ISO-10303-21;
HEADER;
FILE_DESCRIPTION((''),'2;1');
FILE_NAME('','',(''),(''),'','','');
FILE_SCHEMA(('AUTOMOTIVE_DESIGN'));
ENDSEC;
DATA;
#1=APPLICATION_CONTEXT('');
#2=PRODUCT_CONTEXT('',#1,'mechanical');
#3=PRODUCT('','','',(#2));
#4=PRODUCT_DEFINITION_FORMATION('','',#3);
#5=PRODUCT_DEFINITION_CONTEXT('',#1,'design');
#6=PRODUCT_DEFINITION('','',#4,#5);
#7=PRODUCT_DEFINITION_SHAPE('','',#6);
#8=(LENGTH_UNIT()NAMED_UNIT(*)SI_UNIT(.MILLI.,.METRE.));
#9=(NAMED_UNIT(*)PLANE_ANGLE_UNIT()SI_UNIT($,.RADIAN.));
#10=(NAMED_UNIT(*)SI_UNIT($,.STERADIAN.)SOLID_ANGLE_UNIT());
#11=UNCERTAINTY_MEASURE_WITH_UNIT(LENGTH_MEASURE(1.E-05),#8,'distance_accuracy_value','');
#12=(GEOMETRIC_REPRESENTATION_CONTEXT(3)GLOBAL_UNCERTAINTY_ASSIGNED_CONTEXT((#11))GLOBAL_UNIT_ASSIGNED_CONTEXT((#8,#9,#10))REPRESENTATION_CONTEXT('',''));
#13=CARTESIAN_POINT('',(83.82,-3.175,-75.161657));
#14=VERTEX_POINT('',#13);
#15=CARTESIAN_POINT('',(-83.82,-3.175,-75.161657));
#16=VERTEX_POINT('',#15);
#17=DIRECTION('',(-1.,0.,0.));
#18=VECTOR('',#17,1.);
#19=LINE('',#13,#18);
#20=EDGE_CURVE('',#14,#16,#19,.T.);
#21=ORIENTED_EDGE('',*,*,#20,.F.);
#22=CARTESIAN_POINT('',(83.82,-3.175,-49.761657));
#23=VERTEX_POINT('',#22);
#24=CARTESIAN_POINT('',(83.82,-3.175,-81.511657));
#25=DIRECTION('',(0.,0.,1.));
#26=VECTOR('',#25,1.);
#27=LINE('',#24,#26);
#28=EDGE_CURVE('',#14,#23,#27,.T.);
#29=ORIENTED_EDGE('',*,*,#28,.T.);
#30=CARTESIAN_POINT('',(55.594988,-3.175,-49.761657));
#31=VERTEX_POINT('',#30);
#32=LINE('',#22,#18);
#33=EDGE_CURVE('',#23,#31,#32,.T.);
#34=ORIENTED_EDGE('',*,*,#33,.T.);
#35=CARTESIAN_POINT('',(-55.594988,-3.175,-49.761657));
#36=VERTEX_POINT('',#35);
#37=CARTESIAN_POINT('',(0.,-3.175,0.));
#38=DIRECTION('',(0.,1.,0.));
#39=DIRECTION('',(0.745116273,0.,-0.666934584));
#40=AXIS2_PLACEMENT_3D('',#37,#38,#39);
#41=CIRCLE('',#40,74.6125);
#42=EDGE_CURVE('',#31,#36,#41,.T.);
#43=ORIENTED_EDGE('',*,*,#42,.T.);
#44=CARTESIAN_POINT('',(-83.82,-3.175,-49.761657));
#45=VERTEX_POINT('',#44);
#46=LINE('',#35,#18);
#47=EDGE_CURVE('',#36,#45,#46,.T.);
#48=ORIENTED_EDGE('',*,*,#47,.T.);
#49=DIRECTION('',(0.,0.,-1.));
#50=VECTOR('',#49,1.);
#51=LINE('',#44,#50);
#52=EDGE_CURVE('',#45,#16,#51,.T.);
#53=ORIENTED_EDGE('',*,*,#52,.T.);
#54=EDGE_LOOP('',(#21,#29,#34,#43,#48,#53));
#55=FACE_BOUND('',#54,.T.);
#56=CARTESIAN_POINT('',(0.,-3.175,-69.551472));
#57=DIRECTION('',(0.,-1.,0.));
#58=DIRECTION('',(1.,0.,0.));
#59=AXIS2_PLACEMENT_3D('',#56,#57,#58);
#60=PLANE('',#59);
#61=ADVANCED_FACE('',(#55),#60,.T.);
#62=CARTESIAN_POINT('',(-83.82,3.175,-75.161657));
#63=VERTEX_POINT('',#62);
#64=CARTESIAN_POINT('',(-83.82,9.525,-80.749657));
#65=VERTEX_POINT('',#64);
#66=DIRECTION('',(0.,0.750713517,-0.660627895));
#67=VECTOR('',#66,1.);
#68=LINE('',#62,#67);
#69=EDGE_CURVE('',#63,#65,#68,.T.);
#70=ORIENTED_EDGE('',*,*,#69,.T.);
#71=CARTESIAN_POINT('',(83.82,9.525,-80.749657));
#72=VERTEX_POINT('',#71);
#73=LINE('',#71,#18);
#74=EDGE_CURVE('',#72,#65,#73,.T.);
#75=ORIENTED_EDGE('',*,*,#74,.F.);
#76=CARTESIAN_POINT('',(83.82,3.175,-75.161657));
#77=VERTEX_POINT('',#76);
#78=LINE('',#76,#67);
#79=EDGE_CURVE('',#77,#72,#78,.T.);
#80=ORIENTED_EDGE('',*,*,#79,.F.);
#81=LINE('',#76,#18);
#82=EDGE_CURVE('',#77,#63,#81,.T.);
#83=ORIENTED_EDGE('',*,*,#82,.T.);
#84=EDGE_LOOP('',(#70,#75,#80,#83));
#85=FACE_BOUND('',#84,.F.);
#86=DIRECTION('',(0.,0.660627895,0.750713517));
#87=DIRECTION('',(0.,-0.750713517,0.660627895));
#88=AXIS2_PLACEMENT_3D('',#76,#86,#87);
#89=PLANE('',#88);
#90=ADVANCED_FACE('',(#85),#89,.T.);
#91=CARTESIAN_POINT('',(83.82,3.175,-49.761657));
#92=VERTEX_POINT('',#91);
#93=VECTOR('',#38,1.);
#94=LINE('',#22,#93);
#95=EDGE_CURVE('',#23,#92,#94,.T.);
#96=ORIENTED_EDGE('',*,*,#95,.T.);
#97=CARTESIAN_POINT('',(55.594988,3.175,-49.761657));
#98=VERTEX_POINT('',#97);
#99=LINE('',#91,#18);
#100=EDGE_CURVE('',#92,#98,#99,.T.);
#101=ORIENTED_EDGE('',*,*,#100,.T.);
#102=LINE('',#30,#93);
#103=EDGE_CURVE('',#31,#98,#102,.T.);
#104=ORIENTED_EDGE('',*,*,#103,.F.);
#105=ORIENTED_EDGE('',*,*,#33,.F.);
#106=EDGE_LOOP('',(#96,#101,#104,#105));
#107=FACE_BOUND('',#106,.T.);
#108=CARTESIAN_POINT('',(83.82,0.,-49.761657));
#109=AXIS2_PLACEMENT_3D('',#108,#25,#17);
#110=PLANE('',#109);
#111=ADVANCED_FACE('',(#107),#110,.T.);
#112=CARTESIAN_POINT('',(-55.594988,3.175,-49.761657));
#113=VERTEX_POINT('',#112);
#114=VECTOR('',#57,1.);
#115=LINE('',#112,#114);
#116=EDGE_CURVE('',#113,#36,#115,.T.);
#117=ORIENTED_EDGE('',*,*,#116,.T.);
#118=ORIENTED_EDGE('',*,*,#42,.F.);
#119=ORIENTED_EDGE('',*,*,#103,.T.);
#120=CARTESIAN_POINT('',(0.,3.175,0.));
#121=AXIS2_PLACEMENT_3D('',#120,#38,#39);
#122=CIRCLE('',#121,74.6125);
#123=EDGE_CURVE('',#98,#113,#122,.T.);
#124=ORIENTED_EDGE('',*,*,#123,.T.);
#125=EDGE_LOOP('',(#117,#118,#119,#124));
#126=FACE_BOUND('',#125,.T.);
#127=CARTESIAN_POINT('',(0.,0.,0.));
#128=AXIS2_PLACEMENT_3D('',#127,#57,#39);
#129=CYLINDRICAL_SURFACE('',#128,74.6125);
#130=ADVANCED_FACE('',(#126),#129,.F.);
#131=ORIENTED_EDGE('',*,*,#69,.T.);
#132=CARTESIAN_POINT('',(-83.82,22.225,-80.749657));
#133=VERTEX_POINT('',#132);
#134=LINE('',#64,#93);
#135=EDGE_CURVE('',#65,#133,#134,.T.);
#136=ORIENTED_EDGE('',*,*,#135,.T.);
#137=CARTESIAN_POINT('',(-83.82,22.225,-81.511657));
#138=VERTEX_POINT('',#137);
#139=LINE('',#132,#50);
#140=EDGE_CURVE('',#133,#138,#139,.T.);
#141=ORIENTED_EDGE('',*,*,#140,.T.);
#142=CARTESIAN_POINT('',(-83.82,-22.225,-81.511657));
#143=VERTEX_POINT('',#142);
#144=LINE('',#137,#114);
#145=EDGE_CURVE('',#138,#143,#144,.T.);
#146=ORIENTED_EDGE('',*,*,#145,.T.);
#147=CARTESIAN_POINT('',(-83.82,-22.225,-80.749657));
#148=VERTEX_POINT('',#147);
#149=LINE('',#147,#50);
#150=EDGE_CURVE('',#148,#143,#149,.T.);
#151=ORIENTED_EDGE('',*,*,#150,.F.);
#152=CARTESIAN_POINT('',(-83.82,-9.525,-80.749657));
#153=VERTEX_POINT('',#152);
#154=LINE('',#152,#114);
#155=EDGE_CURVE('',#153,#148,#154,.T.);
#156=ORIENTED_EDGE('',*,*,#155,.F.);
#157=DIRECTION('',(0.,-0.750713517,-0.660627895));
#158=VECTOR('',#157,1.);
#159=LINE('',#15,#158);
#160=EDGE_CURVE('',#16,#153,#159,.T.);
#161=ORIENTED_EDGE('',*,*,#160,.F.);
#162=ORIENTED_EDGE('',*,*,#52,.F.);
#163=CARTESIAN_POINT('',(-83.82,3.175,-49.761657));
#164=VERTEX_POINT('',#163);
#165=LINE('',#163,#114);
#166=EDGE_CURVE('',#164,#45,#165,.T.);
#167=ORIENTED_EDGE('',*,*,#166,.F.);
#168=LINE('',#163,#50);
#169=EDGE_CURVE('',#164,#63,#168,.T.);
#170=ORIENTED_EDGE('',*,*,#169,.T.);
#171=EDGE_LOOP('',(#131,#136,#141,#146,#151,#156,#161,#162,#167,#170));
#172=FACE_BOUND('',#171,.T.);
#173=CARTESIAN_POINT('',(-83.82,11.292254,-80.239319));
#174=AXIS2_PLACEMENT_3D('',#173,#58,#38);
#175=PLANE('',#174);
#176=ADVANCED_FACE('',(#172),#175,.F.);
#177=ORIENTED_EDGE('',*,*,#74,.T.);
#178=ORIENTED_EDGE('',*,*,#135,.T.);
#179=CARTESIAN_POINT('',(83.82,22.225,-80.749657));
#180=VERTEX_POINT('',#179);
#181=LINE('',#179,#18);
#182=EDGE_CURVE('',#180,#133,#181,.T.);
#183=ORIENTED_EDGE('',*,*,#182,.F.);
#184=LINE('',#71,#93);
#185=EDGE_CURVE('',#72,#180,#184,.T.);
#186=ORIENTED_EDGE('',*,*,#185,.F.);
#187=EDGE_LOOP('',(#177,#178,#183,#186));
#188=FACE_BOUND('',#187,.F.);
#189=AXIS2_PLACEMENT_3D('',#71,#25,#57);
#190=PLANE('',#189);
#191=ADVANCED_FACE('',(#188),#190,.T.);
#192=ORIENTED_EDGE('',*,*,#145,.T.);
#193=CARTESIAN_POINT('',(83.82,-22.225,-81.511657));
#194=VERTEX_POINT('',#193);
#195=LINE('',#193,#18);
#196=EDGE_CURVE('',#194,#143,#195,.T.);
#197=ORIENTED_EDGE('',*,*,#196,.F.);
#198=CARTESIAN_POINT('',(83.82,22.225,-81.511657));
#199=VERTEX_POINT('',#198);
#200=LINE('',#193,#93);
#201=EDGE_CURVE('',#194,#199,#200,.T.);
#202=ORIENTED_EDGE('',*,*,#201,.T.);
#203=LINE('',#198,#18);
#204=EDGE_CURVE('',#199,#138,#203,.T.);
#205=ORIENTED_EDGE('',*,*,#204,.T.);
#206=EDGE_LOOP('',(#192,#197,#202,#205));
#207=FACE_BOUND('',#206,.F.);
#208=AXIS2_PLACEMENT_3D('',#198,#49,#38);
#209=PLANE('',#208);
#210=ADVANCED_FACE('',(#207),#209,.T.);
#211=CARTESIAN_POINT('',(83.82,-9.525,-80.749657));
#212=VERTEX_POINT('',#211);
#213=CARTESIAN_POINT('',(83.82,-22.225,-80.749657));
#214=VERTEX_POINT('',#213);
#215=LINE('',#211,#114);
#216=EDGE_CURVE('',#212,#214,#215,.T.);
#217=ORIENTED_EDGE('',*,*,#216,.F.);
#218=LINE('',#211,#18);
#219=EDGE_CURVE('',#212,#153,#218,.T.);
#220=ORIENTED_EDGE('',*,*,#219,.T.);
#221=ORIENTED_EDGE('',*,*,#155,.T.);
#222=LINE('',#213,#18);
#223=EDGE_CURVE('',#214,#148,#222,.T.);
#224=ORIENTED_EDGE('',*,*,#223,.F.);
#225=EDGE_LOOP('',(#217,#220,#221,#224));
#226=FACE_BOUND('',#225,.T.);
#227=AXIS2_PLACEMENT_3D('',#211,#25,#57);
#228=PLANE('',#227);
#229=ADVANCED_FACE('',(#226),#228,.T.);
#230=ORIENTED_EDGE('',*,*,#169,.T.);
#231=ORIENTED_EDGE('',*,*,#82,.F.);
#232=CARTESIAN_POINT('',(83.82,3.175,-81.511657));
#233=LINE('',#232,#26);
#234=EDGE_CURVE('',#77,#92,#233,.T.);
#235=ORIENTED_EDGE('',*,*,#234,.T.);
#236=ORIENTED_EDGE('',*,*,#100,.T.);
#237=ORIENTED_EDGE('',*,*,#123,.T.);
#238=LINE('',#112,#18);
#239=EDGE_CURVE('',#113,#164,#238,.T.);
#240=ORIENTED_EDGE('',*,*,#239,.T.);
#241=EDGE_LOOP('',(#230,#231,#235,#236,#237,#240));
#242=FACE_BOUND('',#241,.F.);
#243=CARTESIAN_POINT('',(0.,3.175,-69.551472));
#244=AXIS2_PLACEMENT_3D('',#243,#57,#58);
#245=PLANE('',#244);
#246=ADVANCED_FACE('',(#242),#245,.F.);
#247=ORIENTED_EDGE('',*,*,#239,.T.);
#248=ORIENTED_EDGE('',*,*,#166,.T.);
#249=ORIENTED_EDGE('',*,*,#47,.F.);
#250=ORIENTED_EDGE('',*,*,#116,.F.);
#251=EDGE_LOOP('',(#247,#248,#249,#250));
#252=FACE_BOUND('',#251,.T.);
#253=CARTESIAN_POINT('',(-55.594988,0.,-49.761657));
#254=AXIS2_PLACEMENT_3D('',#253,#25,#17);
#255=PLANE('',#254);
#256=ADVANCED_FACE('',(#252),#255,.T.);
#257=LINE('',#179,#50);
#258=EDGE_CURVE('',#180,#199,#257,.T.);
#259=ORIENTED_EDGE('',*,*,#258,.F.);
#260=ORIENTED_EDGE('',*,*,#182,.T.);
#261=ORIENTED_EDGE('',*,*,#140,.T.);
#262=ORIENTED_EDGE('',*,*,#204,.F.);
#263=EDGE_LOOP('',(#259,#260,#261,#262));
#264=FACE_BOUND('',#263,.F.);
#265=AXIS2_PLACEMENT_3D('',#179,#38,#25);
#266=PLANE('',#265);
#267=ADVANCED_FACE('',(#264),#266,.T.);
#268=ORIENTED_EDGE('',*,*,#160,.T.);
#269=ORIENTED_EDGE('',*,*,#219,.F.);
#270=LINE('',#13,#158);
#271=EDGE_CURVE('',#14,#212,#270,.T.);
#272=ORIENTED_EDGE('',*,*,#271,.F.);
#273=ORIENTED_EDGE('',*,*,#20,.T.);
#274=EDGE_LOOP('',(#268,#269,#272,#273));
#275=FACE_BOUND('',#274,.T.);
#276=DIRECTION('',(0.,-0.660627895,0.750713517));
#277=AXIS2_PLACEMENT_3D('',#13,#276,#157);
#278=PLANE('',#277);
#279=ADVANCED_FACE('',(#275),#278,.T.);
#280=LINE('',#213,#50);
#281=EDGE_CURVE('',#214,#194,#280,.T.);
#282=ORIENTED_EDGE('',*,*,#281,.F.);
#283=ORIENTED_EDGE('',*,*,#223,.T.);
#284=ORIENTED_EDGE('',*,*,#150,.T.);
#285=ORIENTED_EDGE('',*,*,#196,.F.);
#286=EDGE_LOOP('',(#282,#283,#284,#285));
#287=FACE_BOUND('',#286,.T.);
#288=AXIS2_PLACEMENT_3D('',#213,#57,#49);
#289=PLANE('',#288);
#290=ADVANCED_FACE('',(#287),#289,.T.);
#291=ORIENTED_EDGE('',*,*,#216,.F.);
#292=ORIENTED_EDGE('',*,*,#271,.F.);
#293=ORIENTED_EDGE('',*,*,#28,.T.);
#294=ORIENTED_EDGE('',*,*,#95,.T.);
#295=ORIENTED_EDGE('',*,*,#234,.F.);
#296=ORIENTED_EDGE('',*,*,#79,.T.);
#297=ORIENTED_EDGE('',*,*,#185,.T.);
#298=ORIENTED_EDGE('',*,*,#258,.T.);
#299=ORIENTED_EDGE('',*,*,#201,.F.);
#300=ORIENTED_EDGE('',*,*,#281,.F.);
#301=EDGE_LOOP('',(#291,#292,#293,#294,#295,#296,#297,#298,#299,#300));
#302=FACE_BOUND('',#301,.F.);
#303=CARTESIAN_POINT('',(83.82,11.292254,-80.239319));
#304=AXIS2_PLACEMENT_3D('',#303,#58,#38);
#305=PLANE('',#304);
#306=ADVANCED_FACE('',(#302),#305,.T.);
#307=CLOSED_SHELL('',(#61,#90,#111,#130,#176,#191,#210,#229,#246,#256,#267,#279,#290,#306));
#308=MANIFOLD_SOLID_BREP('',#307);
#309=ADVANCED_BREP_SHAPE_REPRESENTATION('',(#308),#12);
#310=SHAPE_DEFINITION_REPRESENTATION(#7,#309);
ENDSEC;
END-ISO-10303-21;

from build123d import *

# Parameters (mm, degrees)
F1_DEPTH = 3.175
F3_DEPTH = 167.64


# Not quite as in the source:
# - a pattern or mirror of a feature is missing from the dataset's text; its kind, count and spacing are read off the source's solid


with BuildPart() as f1:
    # F0 (on Front) → F1 (new body, symmetric)
    with BuildSketch(Plane.XZ):
        with BuildLine():
            ThreePointArc((55.5949879174, -49.7616566718), (0, -74.6125), (-55.5949879174, -49.7616566718))
            Line((-55.5949879174, -49.7616566718), (-83.82, -49.7616566718))
            Line((-83.82, -49.7616566718), (-83.82, -81.5116566718))
            Line((-83.82, -81.5116566718), (83.82, -81.5116566718))
            Line((83.82, -81.5116566718), (83.82, -49.7616566718))
            Line((83.82, -49.7616566718), (55.5949879174, -49.7616566718))
        make_face()
    extrude(amount=F1_DEPTH, both=True)

    # F2 (on face) → F3 (join, through all)
    with BuildSketch(Plane.YZ.offset(83.82)):
        Polygon((-3.175, -81.5116566718), (-3.175, -75.1616566718), (-9.525, -80.7496566718), (-22.225, -80.7496566718), (-22.225, -81.5116566718), (-10.3909090909, -81.5116566718), align=None)
    f3 = extrude(amount=-F3_DEPTH)

    # F3_copies: F3 across plane
    add(f3.mirror(Plane.ZX))


solid = f1.part
